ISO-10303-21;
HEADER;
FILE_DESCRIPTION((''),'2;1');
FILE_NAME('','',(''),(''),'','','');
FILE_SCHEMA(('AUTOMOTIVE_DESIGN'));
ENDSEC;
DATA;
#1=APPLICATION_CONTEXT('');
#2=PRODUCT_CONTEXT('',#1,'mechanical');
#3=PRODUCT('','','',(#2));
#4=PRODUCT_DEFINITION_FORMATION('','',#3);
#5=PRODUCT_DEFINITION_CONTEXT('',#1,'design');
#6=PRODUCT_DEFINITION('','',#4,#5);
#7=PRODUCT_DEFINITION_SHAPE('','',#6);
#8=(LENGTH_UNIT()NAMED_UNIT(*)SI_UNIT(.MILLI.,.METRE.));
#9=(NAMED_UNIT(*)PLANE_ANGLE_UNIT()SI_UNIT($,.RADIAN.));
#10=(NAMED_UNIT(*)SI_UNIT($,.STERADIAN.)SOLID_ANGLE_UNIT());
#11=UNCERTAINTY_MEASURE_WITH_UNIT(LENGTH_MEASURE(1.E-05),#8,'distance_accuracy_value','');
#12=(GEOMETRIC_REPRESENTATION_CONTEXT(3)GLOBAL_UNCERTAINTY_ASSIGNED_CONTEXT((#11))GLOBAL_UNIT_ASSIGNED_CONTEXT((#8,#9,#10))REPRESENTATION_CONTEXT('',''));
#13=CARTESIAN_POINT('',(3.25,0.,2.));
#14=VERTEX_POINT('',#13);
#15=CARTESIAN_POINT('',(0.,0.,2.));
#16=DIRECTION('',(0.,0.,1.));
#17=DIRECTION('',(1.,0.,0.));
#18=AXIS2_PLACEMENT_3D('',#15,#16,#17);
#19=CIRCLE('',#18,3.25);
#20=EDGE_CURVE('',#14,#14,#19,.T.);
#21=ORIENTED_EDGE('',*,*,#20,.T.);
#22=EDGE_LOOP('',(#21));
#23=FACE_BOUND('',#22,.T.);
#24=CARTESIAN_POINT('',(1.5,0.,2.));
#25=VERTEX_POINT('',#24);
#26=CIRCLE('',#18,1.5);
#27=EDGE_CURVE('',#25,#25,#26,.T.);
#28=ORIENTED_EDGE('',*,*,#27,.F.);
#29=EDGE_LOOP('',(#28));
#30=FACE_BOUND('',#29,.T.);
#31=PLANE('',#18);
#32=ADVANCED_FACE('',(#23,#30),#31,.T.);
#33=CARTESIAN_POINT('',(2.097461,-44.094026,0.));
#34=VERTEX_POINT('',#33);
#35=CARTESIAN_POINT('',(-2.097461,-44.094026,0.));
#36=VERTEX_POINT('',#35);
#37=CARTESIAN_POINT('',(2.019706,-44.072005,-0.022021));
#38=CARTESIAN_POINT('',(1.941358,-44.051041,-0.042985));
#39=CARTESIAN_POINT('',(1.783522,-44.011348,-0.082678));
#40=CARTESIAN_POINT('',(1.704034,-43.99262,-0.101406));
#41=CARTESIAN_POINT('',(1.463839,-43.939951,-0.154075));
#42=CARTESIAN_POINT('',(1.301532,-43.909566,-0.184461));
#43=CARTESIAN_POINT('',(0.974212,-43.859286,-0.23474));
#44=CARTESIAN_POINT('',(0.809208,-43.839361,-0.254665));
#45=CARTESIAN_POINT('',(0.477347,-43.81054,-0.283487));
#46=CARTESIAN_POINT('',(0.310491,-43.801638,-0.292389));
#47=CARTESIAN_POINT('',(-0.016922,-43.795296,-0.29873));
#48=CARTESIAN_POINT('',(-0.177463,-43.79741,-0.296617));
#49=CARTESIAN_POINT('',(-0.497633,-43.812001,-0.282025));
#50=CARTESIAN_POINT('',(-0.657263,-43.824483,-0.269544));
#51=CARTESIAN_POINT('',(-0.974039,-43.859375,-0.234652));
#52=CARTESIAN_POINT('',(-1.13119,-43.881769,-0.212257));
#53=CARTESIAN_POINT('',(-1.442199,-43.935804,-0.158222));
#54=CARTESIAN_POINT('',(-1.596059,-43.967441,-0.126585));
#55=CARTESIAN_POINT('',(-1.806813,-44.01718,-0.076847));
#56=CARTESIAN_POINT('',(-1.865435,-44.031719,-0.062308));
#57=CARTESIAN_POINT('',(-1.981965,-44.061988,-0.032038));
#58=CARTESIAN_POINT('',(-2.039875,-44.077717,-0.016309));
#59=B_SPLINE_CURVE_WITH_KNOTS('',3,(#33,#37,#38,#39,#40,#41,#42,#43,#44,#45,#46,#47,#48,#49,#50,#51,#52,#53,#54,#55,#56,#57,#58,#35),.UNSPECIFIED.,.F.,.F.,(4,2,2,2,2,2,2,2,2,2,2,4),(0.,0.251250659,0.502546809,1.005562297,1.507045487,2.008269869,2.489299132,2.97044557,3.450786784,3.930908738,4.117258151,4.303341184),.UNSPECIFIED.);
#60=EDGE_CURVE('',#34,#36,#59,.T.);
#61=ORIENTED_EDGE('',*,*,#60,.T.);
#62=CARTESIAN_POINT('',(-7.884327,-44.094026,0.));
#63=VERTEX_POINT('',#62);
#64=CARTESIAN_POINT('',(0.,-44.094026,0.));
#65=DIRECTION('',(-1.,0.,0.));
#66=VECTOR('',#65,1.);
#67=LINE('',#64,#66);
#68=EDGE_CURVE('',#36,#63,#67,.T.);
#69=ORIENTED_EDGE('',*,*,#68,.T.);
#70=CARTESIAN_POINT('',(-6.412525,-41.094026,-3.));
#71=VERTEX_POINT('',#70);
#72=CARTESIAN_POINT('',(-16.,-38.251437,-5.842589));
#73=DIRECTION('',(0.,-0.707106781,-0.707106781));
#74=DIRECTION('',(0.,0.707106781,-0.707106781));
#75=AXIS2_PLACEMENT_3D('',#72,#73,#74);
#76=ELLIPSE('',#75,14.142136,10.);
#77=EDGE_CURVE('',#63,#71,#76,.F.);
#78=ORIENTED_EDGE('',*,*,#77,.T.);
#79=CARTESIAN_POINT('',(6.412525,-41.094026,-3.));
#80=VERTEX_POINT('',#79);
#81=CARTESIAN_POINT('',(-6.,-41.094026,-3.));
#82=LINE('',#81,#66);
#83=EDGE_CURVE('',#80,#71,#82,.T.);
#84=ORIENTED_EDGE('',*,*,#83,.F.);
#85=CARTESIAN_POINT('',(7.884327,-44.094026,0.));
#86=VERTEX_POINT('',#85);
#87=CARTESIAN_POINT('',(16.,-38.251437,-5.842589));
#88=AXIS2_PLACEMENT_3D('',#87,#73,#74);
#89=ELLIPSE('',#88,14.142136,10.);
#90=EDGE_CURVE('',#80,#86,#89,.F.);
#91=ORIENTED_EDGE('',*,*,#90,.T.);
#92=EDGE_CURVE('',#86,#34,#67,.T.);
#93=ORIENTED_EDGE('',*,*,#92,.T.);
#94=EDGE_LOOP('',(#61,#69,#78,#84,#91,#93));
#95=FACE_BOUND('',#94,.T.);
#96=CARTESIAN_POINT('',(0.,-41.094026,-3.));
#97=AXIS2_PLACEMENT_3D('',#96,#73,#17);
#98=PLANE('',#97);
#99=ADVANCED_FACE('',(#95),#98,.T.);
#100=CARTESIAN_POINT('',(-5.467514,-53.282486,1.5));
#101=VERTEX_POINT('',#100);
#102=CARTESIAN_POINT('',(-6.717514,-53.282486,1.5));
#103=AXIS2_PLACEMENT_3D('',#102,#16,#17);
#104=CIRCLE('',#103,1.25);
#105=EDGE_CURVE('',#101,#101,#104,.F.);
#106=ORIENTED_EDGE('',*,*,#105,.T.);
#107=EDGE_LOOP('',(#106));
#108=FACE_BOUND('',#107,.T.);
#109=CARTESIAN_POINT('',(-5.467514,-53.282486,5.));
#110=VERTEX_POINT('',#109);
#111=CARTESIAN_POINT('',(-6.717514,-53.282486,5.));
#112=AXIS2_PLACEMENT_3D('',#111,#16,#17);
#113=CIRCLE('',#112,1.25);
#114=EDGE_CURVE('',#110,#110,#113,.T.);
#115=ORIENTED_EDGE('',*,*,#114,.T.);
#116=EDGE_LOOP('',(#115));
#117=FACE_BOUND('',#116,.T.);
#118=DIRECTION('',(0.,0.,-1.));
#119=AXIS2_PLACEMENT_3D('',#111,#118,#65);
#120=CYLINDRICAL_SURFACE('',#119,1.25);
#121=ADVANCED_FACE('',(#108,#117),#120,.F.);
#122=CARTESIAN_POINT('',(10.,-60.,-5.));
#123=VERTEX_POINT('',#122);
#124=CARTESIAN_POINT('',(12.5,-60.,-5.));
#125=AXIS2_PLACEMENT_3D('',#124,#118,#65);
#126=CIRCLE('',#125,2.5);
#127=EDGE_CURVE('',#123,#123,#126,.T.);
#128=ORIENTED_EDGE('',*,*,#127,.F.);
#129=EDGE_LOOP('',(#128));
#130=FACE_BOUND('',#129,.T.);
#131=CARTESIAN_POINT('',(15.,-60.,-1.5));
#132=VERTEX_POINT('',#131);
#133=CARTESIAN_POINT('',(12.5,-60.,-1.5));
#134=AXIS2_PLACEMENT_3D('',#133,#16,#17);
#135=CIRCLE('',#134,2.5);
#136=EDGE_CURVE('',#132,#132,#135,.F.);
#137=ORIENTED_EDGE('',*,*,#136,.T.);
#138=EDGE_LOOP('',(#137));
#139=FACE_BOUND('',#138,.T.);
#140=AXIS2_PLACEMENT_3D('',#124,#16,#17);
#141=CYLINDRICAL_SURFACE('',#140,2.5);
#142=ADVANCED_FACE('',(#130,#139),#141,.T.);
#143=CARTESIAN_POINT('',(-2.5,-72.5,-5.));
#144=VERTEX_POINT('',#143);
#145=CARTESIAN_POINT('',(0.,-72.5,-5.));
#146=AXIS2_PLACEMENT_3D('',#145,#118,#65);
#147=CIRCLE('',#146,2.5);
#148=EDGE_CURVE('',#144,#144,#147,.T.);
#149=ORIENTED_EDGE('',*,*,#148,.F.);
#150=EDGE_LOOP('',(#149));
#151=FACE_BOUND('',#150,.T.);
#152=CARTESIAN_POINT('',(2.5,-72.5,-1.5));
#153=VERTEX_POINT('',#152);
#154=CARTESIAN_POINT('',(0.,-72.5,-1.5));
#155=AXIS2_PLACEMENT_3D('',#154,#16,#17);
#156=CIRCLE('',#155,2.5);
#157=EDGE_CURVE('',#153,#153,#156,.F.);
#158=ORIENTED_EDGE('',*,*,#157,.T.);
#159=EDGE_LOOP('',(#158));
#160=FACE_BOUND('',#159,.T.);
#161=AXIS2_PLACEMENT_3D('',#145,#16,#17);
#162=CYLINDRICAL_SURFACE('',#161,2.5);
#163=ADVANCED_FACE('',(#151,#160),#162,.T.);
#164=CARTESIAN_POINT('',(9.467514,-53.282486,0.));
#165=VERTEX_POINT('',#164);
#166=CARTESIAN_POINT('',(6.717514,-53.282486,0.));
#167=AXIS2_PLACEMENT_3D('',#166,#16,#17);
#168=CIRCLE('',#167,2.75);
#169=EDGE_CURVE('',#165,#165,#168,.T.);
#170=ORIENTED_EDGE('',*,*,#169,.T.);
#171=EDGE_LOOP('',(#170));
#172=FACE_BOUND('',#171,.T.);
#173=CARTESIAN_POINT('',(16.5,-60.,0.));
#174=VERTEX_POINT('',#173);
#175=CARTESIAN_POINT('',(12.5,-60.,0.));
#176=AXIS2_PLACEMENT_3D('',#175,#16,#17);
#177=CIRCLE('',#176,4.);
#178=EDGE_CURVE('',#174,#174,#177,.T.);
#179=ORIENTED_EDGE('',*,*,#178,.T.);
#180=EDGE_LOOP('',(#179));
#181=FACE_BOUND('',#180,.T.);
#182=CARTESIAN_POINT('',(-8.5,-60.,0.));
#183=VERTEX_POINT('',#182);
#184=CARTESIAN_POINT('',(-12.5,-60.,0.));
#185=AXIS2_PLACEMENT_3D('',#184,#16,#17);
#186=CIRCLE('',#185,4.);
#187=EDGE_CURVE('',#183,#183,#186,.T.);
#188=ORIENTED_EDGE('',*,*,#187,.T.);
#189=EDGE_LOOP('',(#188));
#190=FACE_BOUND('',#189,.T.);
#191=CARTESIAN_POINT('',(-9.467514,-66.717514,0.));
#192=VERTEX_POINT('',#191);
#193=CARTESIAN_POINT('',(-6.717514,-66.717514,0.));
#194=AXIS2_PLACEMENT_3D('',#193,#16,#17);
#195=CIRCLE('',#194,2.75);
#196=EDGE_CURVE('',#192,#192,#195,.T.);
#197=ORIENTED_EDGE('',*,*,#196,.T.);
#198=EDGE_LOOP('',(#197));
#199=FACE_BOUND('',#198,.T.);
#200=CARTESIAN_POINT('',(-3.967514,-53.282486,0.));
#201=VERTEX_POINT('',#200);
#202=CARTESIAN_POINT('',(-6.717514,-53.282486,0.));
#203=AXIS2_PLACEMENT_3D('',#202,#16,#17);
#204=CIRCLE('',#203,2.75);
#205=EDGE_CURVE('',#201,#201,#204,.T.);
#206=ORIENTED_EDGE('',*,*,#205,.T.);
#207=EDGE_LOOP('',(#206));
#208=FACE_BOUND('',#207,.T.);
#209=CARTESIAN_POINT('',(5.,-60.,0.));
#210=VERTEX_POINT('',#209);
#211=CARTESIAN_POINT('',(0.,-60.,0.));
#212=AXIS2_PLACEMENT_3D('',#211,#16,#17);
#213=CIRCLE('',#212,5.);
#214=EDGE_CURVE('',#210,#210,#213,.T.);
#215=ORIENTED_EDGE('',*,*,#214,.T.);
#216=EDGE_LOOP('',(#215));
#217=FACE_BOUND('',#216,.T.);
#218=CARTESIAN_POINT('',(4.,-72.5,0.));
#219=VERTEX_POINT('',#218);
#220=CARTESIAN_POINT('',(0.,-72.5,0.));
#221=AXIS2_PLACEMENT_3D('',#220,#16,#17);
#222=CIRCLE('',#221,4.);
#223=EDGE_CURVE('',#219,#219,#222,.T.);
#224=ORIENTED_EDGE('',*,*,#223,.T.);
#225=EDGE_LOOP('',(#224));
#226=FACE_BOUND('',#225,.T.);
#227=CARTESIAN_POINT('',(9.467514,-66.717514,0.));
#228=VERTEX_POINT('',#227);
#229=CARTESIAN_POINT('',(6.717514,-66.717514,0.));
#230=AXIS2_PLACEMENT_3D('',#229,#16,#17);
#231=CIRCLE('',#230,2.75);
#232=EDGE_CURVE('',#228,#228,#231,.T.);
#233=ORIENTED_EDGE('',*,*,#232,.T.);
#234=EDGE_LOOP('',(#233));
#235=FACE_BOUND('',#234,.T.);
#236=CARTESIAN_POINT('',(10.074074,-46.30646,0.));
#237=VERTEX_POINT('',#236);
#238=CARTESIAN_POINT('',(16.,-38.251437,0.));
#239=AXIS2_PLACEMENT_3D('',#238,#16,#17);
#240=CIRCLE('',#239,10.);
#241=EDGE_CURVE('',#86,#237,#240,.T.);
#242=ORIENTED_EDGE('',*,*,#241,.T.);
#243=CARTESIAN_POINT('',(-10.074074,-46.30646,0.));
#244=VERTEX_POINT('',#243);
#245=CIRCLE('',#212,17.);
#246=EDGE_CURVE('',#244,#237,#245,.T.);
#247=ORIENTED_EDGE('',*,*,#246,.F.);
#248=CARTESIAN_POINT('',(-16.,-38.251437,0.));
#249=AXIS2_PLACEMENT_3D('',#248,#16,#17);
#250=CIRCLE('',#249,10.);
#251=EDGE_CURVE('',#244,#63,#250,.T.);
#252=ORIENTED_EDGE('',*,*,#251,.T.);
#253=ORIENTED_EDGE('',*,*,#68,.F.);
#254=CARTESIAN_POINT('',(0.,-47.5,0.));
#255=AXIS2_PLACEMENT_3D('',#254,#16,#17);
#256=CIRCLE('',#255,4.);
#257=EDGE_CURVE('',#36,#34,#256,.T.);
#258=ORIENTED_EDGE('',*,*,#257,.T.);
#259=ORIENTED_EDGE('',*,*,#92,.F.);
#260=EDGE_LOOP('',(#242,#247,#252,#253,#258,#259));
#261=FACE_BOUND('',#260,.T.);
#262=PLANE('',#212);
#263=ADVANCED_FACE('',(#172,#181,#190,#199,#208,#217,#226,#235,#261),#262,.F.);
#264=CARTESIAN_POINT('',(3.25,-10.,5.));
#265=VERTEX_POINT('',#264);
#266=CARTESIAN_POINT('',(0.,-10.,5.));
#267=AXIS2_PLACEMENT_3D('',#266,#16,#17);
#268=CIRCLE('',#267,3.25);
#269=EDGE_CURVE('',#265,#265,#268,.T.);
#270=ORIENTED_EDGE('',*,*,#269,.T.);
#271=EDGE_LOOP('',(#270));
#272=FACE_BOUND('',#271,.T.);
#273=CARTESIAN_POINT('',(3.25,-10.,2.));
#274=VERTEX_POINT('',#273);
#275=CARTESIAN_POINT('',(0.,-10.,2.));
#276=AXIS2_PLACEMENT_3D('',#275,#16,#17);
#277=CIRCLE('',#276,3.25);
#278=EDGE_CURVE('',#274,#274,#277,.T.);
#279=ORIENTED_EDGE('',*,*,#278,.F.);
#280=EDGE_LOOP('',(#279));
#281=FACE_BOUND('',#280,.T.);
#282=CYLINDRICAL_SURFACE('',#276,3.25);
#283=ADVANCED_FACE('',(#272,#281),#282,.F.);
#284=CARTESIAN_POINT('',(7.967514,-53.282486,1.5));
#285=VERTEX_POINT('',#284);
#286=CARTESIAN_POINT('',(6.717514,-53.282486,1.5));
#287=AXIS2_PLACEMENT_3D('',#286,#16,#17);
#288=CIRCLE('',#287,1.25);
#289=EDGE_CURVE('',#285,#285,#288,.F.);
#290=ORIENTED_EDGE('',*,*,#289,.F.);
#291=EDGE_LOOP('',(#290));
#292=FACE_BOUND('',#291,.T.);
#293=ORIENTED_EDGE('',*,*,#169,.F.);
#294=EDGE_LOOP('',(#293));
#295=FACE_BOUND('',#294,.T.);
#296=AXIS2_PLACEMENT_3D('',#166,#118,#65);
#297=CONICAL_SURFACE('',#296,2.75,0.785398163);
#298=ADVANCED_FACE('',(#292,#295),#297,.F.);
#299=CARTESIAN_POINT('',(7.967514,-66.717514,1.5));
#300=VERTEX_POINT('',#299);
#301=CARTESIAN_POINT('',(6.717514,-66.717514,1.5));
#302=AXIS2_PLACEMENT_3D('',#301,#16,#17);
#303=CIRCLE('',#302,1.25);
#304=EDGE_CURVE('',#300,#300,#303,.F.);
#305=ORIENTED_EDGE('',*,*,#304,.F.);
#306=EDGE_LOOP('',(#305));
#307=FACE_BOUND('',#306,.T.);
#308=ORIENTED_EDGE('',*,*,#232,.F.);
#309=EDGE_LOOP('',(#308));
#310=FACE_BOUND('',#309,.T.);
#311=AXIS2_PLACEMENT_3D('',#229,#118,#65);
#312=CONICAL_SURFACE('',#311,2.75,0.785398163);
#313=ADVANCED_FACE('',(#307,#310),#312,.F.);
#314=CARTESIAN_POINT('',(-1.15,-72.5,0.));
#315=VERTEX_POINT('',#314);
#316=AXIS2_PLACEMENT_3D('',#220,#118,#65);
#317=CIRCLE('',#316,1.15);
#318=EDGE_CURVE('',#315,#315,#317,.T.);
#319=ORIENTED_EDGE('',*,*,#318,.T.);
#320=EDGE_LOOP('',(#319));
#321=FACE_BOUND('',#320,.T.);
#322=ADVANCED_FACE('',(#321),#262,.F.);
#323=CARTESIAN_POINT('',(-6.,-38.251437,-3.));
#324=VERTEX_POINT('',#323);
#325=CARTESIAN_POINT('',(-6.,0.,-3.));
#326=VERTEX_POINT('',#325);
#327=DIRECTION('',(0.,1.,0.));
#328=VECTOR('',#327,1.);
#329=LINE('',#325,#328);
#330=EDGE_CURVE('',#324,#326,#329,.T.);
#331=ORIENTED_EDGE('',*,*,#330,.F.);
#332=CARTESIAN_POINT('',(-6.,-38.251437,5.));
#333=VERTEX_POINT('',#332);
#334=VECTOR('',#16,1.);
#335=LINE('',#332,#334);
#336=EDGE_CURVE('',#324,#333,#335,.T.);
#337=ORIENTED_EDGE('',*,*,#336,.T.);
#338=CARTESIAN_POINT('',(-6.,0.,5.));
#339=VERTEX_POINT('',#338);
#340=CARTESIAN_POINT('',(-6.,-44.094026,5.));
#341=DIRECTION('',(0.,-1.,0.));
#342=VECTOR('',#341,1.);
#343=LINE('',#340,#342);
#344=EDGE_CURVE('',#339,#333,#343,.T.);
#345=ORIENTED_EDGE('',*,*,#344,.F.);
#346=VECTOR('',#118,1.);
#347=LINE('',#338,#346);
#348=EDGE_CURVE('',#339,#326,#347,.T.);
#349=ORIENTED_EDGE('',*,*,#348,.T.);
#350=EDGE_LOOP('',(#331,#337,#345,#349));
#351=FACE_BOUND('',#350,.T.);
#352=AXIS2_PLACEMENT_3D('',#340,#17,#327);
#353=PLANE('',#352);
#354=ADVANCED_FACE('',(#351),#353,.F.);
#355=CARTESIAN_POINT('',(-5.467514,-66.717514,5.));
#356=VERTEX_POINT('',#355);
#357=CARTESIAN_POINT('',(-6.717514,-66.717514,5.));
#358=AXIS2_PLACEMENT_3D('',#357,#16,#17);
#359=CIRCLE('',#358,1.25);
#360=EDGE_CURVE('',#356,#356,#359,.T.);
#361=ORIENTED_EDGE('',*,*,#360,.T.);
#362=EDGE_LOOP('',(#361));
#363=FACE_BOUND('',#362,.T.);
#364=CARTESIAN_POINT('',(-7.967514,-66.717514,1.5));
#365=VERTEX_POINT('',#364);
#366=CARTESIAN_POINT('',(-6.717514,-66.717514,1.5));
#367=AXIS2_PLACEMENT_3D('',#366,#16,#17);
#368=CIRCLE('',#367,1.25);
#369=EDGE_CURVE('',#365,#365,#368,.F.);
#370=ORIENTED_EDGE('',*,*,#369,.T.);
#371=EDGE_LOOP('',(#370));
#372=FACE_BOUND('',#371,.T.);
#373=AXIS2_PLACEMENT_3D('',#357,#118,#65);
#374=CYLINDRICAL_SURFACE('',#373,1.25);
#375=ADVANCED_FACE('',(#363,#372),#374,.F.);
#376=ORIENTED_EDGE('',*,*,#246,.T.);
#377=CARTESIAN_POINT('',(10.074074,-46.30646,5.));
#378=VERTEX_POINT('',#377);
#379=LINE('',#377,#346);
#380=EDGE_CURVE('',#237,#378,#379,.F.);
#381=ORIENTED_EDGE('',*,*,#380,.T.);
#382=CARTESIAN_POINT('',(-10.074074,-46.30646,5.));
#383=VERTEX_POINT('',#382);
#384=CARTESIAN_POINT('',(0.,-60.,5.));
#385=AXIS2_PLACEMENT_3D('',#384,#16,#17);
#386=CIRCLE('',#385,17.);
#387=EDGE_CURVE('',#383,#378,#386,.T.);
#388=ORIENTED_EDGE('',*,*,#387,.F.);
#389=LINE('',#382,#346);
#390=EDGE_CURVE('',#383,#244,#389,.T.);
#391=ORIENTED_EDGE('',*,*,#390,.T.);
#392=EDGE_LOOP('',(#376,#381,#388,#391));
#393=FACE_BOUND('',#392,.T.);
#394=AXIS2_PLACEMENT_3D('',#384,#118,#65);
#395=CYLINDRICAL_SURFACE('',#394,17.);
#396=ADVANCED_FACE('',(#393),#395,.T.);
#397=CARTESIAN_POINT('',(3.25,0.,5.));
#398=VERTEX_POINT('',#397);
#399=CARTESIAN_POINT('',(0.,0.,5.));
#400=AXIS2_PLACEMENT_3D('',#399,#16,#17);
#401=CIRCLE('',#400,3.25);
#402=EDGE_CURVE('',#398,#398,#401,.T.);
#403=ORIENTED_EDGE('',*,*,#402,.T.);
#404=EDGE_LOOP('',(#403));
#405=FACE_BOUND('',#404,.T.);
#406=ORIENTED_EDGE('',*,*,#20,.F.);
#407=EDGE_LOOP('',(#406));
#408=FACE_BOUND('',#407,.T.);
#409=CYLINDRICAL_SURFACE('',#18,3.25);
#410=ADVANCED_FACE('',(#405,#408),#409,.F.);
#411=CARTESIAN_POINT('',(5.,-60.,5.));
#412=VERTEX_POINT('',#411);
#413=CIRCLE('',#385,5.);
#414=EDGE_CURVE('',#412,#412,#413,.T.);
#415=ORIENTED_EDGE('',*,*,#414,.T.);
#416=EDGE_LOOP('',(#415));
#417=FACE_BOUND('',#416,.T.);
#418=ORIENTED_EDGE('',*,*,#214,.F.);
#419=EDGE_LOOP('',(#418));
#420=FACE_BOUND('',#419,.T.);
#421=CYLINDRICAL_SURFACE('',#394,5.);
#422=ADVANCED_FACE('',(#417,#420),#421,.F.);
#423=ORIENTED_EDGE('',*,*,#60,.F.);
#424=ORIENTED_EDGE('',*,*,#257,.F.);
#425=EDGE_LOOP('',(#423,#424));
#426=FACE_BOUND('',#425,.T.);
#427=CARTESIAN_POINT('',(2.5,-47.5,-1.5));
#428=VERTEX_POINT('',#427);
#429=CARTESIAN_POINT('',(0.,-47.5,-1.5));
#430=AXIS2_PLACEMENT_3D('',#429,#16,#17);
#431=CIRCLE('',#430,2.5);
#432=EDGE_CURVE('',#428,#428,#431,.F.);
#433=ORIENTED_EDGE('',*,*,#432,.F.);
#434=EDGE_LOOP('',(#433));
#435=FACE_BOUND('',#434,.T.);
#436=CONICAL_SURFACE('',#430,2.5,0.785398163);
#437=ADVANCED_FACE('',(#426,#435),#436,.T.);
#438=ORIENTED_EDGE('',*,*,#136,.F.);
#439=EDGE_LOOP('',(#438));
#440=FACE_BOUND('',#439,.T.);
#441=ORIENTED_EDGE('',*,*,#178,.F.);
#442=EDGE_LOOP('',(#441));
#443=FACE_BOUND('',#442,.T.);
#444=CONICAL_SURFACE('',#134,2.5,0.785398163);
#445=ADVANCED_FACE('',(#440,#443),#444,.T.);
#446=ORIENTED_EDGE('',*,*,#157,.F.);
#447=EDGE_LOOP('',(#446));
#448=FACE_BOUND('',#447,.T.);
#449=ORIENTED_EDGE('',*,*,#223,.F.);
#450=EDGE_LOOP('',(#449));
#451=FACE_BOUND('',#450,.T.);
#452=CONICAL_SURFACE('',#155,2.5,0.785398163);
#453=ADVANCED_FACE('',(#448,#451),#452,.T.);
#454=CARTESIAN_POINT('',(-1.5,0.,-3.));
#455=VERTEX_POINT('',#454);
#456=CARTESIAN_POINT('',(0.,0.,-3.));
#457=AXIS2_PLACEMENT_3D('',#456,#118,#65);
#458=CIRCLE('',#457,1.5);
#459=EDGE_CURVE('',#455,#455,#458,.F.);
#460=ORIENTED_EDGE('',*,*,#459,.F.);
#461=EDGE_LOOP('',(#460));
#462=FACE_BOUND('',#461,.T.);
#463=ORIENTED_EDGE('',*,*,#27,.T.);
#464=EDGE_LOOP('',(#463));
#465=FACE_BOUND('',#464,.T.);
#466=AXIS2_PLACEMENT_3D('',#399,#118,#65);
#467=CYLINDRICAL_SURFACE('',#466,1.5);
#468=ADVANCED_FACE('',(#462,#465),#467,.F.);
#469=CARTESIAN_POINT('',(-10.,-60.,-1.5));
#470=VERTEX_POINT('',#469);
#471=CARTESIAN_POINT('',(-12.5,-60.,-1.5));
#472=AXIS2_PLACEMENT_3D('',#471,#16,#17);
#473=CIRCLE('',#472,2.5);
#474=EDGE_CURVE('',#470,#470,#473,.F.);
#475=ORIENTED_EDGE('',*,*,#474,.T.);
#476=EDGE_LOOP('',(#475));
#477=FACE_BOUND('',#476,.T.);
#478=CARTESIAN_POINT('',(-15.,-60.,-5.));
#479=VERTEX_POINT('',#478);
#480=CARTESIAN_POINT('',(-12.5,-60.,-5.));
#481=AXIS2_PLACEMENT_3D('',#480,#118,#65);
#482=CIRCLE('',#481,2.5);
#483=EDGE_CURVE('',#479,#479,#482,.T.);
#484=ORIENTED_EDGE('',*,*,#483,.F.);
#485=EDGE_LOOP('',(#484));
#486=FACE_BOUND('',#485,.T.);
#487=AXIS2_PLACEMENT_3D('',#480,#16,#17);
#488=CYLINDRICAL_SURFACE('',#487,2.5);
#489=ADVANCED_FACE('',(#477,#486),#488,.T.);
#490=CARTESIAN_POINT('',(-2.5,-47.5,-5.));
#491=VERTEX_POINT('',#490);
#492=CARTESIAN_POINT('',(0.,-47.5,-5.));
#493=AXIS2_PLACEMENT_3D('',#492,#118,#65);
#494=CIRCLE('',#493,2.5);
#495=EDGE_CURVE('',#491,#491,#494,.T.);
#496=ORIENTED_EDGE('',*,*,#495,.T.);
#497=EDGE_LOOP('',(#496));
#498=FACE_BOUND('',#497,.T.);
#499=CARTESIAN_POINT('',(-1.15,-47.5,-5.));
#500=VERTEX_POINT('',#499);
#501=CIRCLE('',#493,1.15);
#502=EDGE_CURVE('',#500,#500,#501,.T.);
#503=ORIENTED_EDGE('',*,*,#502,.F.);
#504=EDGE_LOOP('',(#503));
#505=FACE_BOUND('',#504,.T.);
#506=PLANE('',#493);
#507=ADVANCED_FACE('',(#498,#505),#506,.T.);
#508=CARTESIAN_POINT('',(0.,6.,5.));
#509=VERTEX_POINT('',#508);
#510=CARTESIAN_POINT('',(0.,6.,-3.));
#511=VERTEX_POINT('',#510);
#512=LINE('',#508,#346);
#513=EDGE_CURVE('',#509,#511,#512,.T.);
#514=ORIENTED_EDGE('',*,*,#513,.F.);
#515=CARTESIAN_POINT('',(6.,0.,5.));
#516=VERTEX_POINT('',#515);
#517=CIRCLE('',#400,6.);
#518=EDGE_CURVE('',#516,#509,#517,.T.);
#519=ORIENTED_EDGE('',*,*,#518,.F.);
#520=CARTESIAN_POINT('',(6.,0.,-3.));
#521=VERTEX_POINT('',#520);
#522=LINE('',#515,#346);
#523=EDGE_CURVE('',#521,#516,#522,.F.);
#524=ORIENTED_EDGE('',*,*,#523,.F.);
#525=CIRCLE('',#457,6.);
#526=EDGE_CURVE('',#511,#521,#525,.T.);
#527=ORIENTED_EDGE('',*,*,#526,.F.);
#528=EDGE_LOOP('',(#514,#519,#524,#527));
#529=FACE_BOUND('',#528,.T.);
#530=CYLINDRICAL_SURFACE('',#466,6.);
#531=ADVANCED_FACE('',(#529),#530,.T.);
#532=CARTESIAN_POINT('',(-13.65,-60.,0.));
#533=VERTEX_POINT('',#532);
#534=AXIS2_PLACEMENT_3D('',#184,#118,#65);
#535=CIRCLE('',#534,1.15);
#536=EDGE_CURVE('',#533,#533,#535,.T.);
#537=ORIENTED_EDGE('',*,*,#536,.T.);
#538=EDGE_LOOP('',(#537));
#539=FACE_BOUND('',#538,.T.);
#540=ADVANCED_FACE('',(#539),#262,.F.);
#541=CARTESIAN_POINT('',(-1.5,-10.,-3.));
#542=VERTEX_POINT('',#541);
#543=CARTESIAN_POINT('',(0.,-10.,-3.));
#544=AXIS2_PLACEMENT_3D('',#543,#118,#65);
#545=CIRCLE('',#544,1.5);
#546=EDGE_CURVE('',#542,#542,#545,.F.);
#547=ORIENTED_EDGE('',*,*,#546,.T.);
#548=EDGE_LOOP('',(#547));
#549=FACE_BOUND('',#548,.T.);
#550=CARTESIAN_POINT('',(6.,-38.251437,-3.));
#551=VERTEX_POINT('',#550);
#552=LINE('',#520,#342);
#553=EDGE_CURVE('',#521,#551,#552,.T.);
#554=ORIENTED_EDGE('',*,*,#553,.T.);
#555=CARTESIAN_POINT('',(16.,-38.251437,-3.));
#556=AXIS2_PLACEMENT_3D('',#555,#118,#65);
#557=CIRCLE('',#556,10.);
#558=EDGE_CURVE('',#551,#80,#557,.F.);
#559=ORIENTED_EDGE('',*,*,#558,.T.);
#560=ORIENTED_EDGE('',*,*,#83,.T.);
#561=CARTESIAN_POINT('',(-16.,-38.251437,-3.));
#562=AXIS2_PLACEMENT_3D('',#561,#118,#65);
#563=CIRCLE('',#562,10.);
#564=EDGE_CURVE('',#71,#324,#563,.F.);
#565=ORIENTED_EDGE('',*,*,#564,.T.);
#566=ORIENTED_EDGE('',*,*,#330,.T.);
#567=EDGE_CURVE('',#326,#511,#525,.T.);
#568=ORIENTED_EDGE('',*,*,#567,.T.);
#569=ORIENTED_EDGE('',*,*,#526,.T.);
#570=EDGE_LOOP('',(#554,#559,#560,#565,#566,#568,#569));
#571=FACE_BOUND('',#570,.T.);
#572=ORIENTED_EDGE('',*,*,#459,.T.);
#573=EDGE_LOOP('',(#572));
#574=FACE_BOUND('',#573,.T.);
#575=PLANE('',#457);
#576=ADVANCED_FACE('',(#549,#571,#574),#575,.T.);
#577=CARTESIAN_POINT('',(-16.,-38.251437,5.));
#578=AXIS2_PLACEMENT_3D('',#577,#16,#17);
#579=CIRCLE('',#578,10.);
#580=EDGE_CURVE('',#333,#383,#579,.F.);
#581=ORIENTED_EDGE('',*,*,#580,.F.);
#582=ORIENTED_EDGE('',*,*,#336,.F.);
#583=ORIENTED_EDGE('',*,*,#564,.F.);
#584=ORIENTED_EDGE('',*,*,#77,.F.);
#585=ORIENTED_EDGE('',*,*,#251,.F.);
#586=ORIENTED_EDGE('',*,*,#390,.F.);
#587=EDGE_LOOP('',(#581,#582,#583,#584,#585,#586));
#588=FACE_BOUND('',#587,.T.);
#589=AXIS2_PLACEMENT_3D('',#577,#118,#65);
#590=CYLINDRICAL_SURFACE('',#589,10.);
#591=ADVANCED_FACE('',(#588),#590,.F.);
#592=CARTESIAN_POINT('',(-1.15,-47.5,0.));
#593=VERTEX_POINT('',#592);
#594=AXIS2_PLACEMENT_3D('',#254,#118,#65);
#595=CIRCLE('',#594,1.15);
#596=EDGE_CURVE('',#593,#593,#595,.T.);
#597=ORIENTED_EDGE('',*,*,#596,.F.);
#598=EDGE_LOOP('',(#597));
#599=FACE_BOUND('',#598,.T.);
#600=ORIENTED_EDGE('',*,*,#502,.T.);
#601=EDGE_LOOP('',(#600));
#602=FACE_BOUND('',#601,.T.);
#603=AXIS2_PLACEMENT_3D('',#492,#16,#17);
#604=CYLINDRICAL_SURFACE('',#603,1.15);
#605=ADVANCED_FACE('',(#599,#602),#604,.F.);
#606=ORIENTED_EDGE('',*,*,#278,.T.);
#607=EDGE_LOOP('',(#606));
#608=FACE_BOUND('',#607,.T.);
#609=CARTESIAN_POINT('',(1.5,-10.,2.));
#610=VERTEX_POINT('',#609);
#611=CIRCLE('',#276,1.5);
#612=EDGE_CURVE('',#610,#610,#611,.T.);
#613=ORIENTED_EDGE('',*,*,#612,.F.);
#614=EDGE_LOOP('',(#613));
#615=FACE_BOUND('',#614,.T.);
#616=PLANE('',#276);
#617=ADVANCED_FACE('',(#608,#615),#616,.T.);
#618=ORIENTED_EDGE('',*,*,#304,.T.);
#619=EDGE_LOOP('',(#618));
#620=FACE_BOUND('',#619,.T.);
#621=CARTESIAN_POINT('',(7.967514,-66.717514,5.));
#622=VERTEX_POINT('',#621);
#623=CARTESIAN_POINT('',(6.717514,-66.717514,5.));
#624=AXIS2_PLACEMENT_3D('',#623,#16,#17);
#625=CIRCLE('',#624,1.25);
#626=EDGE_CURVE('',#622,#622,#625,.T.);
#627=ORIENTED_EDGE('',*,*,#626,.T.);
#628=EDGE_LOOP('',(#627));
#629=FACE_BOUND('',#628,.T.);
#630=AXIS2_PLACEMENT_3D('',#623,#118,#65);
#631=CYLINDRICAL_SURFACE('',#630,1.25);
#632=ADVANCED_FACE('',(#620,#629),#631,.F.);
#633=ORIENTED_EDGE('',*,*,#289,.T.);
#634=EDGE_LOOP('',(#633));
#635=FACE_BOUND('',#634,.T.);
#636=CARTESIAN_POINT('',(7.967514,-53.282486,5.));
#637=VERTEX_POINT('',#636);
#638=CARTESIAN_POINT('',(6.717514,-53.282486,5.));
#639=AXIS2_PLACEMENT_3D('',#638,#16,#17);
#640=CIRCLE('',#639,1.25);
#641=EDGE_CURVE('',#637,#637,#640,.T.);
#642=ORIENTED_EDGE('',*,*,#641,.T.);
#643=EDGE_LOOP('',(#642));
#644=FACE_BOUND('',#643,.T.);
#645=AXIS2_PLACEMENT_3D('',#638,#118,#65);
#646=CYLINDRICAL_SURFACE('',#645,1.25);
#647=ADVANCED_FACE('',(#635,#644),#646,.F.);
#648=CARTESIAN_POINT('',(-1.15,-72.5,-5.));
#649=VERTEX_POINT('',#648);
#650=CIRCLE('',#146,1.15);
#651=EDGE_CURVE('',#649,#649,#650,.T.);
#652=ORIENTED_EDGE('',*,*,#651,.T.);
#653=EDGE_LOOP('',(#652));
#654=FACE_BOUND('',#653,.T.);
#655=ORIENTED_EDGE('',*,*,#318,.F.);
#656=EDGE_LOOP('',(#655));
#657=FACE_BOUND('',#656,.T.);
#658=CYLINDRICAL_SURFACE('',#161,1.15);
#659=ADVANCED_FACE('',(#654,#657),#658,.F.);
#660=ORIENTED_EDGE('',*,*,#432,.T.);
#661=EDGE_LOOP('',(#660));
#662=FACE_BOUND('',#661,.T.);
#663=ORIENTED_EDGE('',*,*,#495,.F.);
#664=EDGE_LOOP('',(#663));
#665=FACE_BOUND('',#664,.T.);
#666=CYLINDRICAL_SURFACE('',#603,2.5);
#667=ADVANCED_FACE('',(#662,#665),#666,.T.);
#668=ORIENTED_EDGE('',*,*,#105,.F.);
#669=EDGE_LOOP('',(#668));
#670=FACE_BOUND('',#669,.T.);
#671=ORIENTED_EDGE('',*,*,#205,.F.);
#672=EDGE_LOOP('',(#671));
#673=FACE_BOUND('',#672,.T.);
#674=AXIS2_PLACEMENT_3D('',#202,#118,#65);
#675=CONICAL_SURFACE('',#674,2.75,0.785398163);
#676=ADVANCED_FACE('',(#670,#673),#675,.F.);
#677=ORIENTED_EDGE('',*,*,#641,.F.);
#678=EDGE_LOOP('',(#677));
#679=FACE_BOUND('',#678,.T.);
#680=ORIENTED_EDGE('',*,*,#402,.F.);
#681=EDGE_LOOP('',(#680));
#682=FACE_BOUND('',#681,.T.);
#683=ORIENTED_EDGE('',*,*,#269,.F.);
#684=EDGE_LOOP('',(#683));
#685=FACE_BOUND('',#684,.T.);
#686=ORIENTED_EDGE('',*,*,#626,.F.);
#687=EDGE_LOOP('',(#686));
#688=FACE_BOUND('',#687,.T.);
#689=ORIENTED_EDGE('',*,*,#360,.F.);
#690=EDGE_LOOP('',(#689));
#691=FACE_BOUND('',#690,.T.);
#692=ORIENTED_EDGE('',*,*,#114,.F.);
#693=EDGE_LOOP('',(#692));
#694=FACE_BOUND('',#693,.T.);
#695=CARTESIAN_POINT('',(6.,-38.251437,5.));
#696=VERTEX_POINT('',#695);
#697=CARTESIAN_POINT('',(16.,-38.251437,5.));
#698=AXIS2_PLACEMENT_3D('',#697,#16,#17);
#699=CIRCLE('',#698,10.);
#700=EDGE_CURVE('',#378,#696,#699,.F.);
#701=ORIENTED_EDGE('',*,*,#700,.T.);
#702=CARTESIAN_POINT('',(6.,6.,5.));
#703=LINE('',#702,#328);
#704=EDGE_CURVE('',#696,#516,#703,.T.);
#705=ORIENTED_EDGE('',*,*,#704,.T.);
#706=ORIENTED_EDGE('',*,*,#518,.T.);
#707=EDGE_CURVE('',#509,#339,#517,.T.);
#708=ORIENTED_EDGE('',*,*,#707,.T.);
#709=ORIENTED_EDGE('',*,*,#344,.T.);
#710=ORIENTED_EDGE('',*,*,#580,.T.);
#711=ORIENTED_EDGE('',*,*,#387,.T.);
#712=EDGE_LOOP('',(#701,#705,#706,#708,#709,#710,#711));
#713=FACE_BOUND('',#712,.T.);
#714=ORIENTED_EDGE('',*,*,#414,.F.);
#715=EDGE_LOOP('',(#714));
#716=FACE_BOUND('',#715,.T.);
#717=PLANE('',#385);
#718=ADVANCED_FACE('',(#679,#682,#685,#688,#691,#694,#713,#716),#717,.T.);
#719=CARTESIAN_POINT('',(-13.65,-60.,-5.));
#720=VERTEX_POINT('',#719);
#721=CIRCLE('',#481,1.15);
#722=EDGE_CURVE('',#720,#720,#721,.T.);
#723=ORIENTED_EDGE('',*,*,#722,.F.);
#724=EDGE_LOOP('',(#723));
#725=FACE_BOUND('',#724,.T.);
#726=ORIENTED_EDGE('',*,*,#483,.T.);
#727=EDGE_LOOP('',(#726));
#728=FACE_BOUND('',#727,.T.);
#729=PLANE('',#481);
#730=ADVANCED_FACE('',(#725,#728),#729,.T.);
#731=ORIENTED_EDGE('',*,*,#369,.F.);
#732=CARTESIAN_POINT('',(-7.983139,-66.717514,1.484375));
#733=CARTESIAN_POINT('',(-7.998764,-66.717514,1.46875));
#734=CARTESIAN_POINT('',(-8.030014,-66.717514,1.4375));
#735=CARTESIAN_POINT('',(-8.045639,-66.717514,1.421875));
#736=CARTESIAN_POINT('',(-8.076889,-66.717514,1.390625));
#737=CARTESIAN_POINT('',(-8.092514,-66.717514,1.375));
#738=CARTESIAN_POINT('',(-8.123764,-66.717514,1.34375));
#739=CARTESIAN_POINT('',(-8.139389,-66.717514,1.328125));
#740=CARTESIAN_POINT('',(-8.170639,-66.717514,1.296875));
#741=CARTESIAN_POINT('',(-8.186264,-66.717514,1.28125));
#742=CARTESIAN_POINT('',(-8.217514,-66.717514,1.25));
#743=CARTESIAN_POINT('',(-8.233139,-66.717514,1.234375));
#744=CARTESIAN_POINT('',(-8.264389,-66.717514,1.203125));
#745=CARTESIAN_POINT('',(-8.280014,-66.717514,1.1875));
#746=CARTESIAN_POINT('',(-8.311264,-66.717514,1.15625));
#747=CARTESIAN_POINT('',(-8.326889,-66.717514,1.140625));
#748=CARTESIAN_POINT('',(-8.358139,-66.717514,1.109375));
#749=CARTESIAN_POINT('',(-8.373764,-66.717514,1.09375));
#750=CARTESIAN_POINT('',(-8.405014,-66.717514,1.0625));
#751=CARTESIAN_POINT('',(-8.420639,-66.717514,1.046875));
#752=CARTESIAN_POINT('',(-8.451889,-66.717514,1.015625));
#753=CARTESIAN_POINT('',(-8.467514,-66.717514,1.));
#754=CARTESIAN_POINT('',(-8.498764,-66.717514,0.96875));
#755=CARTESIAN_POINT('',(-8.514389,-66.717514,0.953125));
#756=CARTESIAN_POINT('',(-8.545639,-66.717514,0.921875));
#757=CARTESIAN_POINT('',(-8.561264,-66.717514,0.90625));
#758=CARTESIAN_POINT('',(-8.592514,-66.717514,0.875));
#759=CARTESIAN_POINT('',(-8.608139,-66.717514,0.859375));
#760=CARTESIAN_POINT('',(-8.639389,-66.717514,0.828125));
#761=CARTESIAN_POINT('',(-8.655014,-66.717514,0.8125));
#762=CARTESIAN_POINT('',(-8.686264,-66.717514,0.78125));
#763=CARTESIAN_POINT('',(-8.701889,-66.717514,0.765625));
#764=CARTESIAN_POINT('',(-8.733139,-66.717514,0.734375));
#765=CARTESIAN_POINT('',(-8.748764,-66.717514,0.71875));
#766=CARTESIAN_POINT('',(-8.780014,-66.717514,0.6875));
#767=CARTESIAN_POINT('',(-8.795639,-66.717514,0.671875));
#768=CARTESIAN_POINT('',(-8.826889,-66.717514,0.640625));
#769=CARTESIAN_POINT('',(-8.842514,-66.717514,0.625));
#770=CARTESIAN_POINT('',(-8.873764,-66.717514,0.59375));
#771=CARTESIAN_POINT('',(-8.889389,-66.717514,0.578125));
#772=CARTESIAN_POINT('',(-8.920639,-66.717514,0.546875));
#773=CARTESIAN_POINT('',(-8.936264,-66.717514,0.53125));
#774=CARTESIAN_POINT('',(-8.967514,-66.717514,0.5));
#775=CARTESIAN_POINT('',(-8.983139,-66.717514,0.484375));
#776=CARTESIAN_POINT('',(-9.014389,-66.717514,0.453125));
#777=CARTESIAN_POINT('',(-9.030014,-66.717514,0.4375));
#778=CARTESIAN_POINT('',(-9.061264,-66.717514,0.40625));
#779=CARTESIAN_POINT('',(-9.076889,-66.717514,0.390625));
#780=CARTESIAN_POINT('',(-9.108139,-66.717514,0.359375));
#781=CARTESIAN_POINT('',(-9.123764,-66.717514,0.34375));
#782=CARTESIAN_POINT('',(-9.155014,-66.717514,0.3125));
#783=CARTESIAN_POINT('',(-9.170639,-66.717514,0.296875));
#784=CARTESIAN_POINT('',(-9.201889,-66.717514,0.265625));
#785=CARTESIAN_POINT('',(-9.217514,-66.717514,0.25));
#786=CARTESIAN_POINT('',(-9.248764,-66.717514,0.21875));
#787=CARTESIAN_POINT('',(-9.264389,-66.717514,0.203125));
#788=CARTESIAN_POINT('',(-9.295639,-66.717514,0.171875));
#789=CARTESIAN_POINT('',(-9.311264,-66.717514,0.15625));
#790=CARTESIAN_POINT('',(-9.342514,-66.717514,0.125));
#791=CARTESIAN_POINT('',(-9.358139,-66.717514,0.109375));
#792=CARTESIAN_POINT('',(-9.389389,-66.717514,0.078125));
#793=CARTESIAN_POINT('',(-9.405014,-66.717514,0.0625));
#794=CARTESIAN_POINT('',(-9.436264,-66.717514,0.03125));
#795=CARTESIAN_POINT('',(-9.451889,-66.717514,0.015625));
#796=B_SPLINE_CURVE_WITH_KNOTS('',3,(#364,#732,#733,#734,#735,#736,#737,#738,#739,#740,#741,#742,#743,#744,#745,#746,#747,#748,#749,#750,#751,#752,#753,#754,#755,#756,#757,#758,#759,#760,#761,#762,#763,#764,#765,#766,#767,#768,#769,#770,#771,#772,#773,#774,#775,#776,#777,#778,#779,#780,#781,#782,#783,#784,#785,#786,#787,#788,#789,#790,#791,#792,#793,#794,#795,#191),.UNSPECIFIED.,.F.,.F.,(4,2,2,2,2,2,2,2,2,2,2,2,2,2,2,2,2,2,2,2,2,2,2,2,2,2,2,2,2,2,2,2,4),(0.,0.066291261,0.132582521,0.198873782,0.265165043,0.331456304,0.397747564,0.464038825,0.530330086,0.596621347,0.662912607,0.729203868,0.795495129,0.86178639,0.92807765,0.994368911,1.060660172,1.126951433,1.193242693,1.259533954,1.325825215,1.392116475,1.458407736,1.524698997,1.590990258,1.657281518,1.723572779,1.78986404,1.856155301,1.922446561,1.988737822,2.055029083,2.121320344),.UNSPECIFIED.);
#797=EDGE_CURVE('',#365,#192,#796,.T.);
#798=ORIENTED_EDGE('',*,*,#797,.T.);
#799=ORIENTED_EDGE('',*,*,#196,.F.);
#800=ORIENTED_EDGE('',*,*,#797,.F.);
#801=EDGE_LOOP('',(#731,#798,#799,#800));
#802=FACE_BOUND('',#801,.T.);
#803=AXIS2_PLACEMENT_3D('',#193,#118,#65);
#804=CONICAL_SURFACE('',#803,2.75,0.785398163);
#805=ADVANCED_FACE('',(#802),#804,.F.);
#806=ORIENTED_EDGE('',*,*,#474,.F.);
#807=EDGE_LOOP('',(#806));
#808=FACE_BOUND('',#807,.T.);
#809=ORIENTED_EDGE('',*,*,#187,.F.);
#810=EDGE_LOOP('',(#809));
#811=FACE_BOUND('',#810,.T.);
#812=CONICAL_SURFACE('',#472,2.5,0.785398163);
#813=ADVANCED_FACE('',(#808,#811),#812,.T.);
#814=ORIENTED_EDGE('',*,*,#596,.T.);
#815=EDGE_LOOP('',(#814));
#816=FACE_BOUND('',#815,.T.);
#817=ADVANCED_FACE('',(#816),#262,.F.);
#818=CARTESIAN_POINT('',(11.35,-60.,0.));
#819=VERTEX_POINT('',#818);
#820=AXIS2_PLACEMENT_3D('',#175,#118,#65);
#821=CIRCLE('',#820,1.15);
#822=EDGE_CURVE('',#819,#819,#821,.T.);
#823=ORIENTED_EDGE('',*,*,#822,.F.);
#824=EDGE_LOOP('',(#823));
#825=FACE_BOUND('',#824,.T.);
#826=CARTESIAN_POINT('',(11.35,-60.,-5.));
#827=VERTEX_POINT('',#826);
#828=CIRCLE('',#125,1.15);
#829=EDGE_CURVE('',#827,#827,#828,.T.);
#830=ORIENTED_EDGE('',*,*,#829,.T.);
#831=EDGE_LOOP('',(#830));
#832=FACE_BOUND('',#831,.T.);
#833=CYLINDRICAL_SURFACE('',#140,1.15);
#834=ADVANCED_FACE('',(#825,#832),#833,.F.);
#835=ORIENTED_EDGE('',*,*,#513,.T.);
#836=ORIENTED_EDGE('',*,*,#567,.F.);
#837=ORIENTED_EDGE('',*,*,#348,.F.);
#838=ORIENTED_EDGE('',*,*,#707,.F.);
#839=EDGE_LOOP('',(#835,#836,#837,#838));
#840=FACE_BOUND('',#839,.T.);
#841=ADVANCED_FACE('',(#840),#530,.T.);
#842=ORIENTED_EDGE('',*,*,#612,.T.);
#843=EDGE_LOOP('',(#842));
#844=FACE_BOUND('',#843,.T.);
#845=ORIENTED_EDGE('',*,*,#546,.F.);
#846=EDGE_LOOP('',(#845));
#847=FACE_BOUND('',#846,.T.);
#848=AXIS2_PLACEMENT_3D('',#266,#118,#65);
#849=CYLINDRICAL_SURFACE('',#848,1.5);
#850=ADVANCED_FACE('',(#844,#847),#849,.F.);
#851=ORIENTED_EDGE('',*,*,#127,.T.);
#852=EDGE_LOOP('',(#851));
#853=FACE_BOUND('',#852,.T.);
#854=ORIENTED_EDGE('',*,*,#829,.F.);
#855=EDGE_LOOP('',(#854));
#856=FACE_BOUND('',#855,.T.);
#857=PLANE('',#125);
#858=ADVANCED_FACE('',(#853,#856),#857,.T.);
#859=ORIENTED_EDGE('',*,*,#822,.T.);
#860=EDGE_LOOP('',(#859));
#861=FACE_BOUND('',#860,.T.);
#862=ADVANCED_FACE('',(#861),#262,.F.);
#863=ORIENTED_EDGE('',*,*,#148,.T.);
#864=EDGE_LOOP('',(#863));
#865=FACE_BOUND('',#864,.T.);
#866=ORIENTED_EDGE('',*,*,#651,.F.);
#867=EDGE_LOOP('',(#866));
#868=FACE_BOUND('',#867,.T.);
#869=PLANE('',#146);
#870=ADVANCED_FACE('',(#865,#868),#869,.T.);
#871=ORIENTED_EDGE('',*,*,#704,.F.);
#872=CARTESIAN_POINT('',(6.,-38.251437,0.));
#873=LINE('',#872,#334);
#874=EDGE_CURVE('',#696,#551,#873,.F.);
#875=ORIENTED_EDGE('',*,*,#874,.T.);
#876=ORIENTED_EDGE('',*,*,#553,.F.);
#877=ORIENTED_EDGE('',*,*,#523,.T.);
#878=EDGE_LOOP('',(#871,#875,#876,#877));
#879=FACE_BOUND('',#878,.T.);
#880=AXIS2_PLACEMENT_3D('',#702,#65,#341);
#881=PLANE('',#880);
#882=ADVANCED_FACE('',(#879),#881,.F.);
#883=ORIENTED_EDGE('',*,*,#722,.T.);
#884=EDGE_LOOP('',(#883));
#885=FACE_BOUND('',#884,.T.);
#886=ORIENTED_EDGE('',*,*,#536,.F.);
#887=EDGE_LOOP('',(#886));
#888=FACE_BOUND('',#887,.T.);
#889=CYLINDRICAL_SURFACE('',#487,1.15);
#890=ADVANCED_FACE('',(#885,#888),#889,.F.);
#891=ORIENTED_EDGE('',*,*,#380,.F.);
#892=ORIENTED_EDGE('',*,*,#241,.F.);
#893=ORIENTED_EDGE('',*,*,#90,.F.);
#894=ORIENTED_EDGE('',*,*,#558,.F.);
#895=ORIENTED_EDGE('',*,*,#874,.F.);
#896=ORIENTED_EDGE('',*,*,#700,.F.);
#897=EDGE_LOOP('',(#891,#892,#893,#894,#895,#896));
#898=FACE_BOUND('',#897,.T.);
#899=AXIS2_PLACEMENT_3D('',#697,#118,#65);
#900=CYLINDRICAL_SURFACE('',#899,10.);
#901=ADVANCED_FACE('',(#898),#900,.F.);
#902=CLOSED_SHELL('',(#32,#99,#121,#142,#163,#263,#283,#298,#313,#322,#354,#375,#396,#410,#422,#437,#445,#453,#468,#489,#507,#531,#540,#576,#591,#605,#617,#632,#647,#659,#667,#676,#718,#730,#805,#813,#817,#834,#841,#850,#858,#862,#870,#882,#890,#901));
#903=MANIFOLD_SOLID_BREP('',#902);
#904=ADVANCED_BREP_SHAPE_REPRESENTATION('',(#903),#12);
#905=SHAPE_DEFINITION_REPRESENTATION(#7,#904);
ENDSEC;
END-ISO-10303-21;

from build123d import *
from build123d.topology import SkipClean

# Parameters (mm, degrees)
SCHIZZO1_R                   = 1.5
SCHIZZO1_R_2                 = 1.25
SCHIZZO1_R_3                 = 5
ESTRUSIONE_ESTRUSIONE1_DEPTH = 5
ESTRUSIONE_ESTRUSIONE2_START = 3
SCHIZZO2_W                   = 12
SCHIZZO2_H                   = 50.094026279
SCHIZZO2_R                   = 1.5
ESTRUSIONE_ESTRUSIONE2_DEPTH = 3
SMUSSO1_SIZE                 = 3
SMUSSO2_SIZE                 = 1.5
RACCORDO1_R                  = 10
RACCORDO2_R                  = 6
SCHIZZO3_R                   = 3.25
TAGLIO_ESTRUSIONE1_DEPTH     = 3
SCHIZZO6_R                   = 2.5
SCHIZZO6_R_2                 = 1.15
ESTRUSIONE_ESTRUSIONE4_DEPTH = 5
SMUSSO5_SIZE                 = 1.5


# Some blends are built 0.0001 mm under size
with BuildPart() as part:
    # Schizzo1 → Estrusione-Estrusione1 (new body)
    with BuildSketch(Plane.XY):
        with BuildLine():
            Line((-6, -44.094026279), (-6, 6))
            Line((-6, 6), (6, 6))
            Line((6, 6), (6, -44.094026279))
            ThreePointArc((6, -44.094026279), (0, -77), (-6, -44.094026279))
        make_face()
        Circle(SCHIZZO1_R, mode=Mode.SUBTRACT)
        with Locations((0, -10)):
            Circle(SCHIZZO1_R, mode=Mode.SUBTRACT)
        with Locations((6.717514421, -53.282485579)):
            Circle(SCHIZZO1_R_2, mode=Mode.SUBTRACT)
        with Locations((6.717514421, -66.717514421)):
            Circle(SCHIZZO1_R_2, mode=Mode.SUBTRACT)
        with Locations((-6.717514421, -66.717514421)):
            Circle(SCHIZZO1_R_2, mode=Mode.SUBTRACT)
        with Locations((-6.717514421, -53.282485579)):
            Circle(SCHIZZO1_R_2, mode=Mode.SUBTRACT)
        with Locations((0, -60)):
            Circle(SCHIZZO1_R_3, mode=Mode.SUBTRACT)
    extrude(amount=ESTRUSIONE_ESTRUSIONE1_DEPTH)

    # Schizzo2 → Estrusione-Estrusione2 (add)
    with SkipClean():  # the faces are left unmerged after this step: merging them gives an invalid solid
        with BuildSketch(Plane(origin=(0, 0, 0), x_dir=(-1, 0, 0), z_dir=(0, 0, -1)).offset(ESTRUSIONE_ESTRUSIONE2_START)):
            with Locations((0, -19.04701314)):
                Rectangle(SCHIZZO2_W, SCHIZZO2_H)
            with Locations((0, -10)):
                Circle(SCHIZZO2_R, mode=Mode.SUBTRACT)
            Circle(SCHIZZO2_R, mode=Mode.SUBTRACT)
        extrude(amount=-ESTRUSIONE_ESTRUSIONE2_DEPTH)

    # Smusso1
    smusso1_edges = [part.edges().sort_by_distance(p)[0] for p in [
        (0, -44.094026279, -3),
    ]]
    chamfer(smusso1_edges, length=SMUSSO1_SIZE - 0.0001)  # a hair under: the kernel refuses the full size

    # Smusso2
    smusso2_edges = [part.edges().sort_by_distance(p)[0] for p in [
        (5.467514421, -53.282485579, 0),
        (5.467514421, -66.717514421, 0),
        (-7.967514421, -66.717514421, 0),
        (-7.967514421, -53.282485579, 0),
    ]]
    chamfer(smusso2_edges, length=SMUSSO2_SIZE)

    # Raccordo1
    # the kernel refuses this fillet: 10 mm, written as the material it adds along each edge
    with BuildSketch(Plane(origin=(-6, -44.094026279, 0), x_dir=(-0.8787816347081872, -0.47722409672983424, 0), z_dir=(0, 0, 1))) as raccordo1_piece_1_section:
        with BuildLine():
            CenterArc((5.999591874, -9.906601275), RACCORDO1_R, 97.8369433, 53.658796906)
            Line((-2.788224473, -5.134360308), (0, 0))
            ThreePointArc((0, 0), (2.318024133, -0.158777832), (4.636048266, 0))
        make_face()
    raccordo1_piece_1 = extrude(amount=5, mode=Mode.PRIVATE)
    raccordo1_piece_1 = split(raccordo1_piece_1, bisect_by=Plane(origin=(-8.522721578, -45.012190054, 0.918063775), z_dir=(0, -0.7071067811865479, -0.7071067811865471)), keep=Keep.TOP, mode=Mode.PRIVATE)
    add(raccordo1_piece_1)
    with BuildSketch(Plane(origin=(-6, -44.094026279, -14.606473626), x_dir=(-0.878781634708187, -0.4772240967298343, 0), z_dir=(0, 0, 1))) as raccordo1_piece_2_section:
        with BuildLine():
            CenterArc((5.999591874, -9.906601275), RACCORDO1_R, 97.8369433, 53.658796906)
            Line((-2.788224473, -5.134360308), (0, 0))
            ThreePointArc((0, 0), (2.318024133, -0.158777832), (4.636048266, 0))
        make_face()
    raccordo1_piece_2 = extrude(amount=19.606473626, mode=Mode.PRIVATE)
    raccordo1_piece_2 = split(raccordo1_piece_2, bisect_by=Plane(origin=(-6.210339147, -41.400349773, 0), z_dir=(0, 0, -1)), keep=Keep.TOP, mode=Mode.PRIVATE)
    raccordo1_piece_2 = split(raccordo1_piece_2, bisect_by=Plane(origin=(-6.210339147, -41.400349773, -3), z_dir=(0, 0, 1)), keep=Keep.TOP, mode=Mode.PRIVATE)
    raccordo1_piece_2 = split(raccordo1_piece_2, bisect_by=Plane(origin=(-6.210339147, -42.183942817, -1.910183463), z_dir=(0, 0.7071067811865479, 0.7071067811865471)), keep=Keep.TOP, mode=Mode.PRIVATE)
    add(raccordo1_piece_2)
    with BuildSketch(Plane(origin=(-6, -44.094026279, 0), x_dir=(-0.8787816347081872, -0.47722409672983424, 0), z_dir=(0, 0, 1))) as raccordo1_piece_3_section:
        with BuildLine():
            CenterArc((5.999591874, -9.906601275), RACCORDO1_R, 97.8369433, 53.658796906)
            Line((-2.788224473, -5.134360308), (0, 0))
            ThreePointArc((0, 0), (2.318024133, -0.158777832), (4.636048266, 0))
        make_face()
    raccordo1_piece_3 = extrude(amount=5, mode=Mode.PRIVATE)
    raccordo1_piece_3 = split(raccordo1_piece_3, bisect_by=Plane(origin=(-7.748442969, -44.094026279, 2.842039125), z_dir=(0, -1, 0)), keep=Keep.TOP, mode=Mode.PRIVATE)
    raccordo1_piece_3 = split(raccordo1_piece_3, bisect_by=Plane(origin=(-7.748442969, -45.857184965, 1.763058685), z_dir=(0, 0.7071067811865479, 0.7071067811865471)), keep=Keep.TOP, mode=Mode.PRIVATE)
    add(raccordo1_piece_3)
    with BuildSketch(Plane(origin=(-6, -44.094026279, 0), x_dir=(-0.8787816347081872, -0.47722409672983424, 0), z_dir=(0, 0, 1))) as raccordo1_piece_4_section:
        with BuildLine():
            CenterArc((5.999591874, -9.906601275), RACCORDO1_R, 97.8369433, 53.658796906)
            Line((-2.788224473, -5.134360308), (0, 0))
            ThreePointArc((0, 0), (2.318024133, -0.158777832), (4.636048266, 0))
        make_face()
    raccordo1_piece_4 = extrude(amount=5, mode=Mode.PRIVATE)
    raccordo1_piece_4 = split(raccordo1_piece_4, bisect_by=Plane(origin=(-6.391601074, -44.094026279, 2.5), z_dir=(0, 1, 0)), keep=Keep.TOP, mode=Mode.PRIVATE)
    add(raccordo1_piece_4)
    with BuildSketch(Plane(origin=(6, -44.094026279, 0), x_dir=(0.8787816347081857, -0.4772240967298369, 0), z_dir=(0, 0, 1))) as raccordo1_piece_5_section:
        with BuildLine():
            CenterArc((5.999591874, 9.906601275), RACCORDO1_R, 208.504259794, 53.658796906)
            Line((-2.788224473, 5.134360308), (0, 0))
            ThreePointArc((0, 0), (2.318024133, 0.158777832), (4.636048266, 0))
        make_face()
    raccordo1_piece_5 = extrude(amount=5, mode=Mode.PRIVATE)
    raccordo1_piece_5 = split(raccordo1_piece_5, bisect_by=Plane(origin=(8.522721578, -45.012190054, 0.918063775), z_dir=(0, -0.7071067811865479, -0.7071067811865471)), keep=Keep.TOP, mode=Mode.PRIVATE)
    add(raccordo1_piece_5)
    with BuildSketch(Plane(origin=(6, -44.094026279, -14.606473626), x_dir=(0.8787816347081857, -0.4772240967298369, 0), z_dir=(0, 0, 1))) as raccordo1_piece_6_section:
        with BuildLine():
            CenterArc((5.999591874, 9.906601275), RACCORDO1_R, 208.504259794, 53.658796906)
            Line((-2.788224473, 5.134360308), (0, 0))
            ThreePointArc((0, 0), (2.318024133, 0.158777832), (4.636048266, 0))
        make_face()
    raccordo1_piece_6 = extrude(amount=19.606473626, mode=Mode.PRIVATE)
    raccordo1_piece_6 = split(raccordo1_piece_6, bisect_by=Plane(origin=(6.210339147, -41.400349773, 0), z_dir=(0, 0, -1)), keep=Keep.TOP, mode=Mode.PRIVATE)
    raccordo1_piece_6 = split(raccordo1_piece_6, bisect_by=Plane(origin=(6.210339147, -42.183942817, -1.910183463), z_dir=(0, 0.7071067811865479, 0.7071067811865471)), keep=Keep.TOP, mode=Mode.PRIVATE)
    raccordo1_piece_6 = split(raccordo1_piece_6, bisect_by=Plane(origin=(6.210339147, -41.400349773, -3), z_dir=(0, 0, 1)), keep=Keep.TOP, mode=Mode.PRIVATE)
    add(raccordo1_piece_6)
    with BuildSketch(Plane(origin=(6, -44.094026279, 0), x_dir=(0.8787816347081857, -0.4772240967298369, 0), z_dir=(0, 0, 1))) as raccordo1_piece_7_section:
        with BuildLine():
            CenterArc((5.999591874, 9.906601275), RACCORDO1_R, 208.504259794, 53.658796906)
            Line((-2.788224473, 5.134360308), (0, 0))
            ThreePointArc((0, 0), (2.318024133, 0.158777832), (4.636048266, 0))
        make_face()
    raccordo1_piece_7 = extrude(amount=5, mode=Mode.PRIVATE)
    raccordo1_piece_7 = split(raccordo1_piece_7, bisect_by=Plane(origin=(7.748442969, -44.094026279, 2.842039125), z_dir=(0, -1, 0)), keep=Keep.TOP, mode=Mode.PRIVATE)
    raccordo1_piece_7 = split(raccordo1_piece_7, bisect_by=Plane(origin=(7.748442969, -45.857184965, 1.763058685), z_dir=(0, 0.7071067811865479, 0.7071067811865471)), keep=Keep.TOP, mode=Mode.PRIVATE)
    add(raccordo1_piece_7)
    with BuildSketch(Plane(origin=(6, -44.094026279, 0), x_dir=(0.8787816347081857, -0.4772240967298369, 0), z_dir=(0, 0, 1))) as raccordo1_piece_8_section:
        with BuildLine():
            CenterArc((5.999591874, 9.906601275), RACCORDO1_R, 208.504259794, 53.658796906)
            Line((-2.788224473, 5.134360308), (0, 0))
            ThreePointArc((0, 0), (2.318024133, 0.158777832), (4.636048266, 0))
        make_face()
    raccordo1_piece_8 = extrude(amount=5, mode=Mode.PRIVATE)
    raccordo1_piece_8 = split(raccordo1_piece_8, bisect_by=Plane(origin=(6.391601074, -44.094026279, 2.5), z_dir=(0, 1, 0)), keep=Keep.TOP, mode=Mode.PRIVATE)
    add(raccordo1_piece_8)

    # Raccordo2
    raccordo2_edges = [part.edges().sort_by_distance(p)[0] for p in [
        (-6, 6, 1),
        (6, 6, 1),
    ]]
    fillet(raccordo2_edges, radius=RACCORDO2_R - 0.0001)  # a hair under: the kernel refuses the full size

    # Schizzo3 → Taglio-Estrusione1 (cut)
    with BuildSketch(Plane.XY.offset(5)):
        Circle(SCHIZZO3_R)
        with Locations((0, -10)):
            Circle(SCHIZZO3_R)
    extrude(amount=-TAGLIO_ESTRUSIONE1_DEPTH, mode=Mode.SUBTRACT)

    # Schizzo6 → Estrusione-Estrusione4 (add)
    # profile 1 of 4: a face of its own
    with BuildSketch(Plane(origin=(0, 0, 0), x_dir=(-1, 0, 0), z_dir=(0, 0, -1))):
        with Locations(Location((0, -47.5, 0), (0, 0, 180))):
            Circle(SCHIZZO6_R)
        with Locations((0, -47.5)):
            Circle(SCHIZZO6_R_2, mode=Mode.SUBTRACT)
    # profile 2 of 4: a face of its own
    with BuildSketch(Plane(origin=(0, 0, 0), x_dir=(-1, 0, 0), z_dir=(0, 0, -1))):
        with Locations(Location((12.5, -60, 0), (0, 0, 180))):
            Circle(SCHIZZO6_R)
        with Locations((12.5, -60)):
            Circle(SCHIZZO6_R_2, mode=Mode.SUBTRACT)
    # profile 3 of 4: a face of its own
    with BuildSketch(Plane(origin=(0, 0, 0), x_dir=(-1, 0, 0), z_dir=(0, 0, -1))):
        with Locations(Location((0, -72.5, 0), (0, 0, 180))):
            Circle(SCHIZZO6_R)
        with Locations((0, -72.5)):
            Circle(SCHIZZO6_R_2, mode=Mode.SUBTRACT)
    # profile 4 of 4: a face of its own
    with BuildSketch(Plane(origin=(0, 0, 0), x_dir=(-1, 0, 0), z_dir=(0, 0, -1))):
        with Locations(Location((-12.5, -60, 0), (0, 0, 180))):
            Circle(SCHIZZO6_R)
        with Locations((-12.5, -60)):
            Circle(SCHIZZO6_R_2, mode=Mode.SUBTRACT)
    extrude(amount=ESTRUSIONE_ESTRUSIONE4_DEPTH)

    # Smusso5
    # the kernel refuses this chamfer: 1.5 mm, written as the material it adds along each edge
    with BuildSketch(Plane(origin=(0, -47.5, 0), x_dir=(1, 0, 0), z_dir=(0, 1, 0))) as smusso5_piece_1:
        Polygon((2.5 + SMUSSO5_SIZE, 0), (2.5, SMUSSO5_SIZE), (2.5, 0), align=None)
    revolve(axis=Axis((0, -47.5, 0), (0, 0, -1)))
    with BuildSketch(Plane(origin=(-12.5, -60, 0), x_dir=(1, 0, 0), z_dir=(0, 1, 0))) as smusso5_piece_2:
        Polygon((2.5 + SMUSSO5_SIZE, 0), (2.5, SMUSSO5_SIZE), (2.5, 0), align=None)
    revolve(axis=Axis((-12.5, -60, 0), (0, 0, -1)))
    with BuildSketch(Plane(origin=(0, -72.5, 0), x_dir=(1, 0, 0), z_dir=(0, 1, 0))) as smusso5_piece_3:
        Polygon((2.5 + SMUSSO5_SIZE, 0), (2.5, SMUSSO5_SIZE), (2.5, 0), align=None)
    revolve(axis=Axis((0, -72.5, 0), (0, 0, -1)))
    with BuildSketch(Plane(origin=(12.5, -60, 0), x_dir=(1, 0, 0), z_dir=(0, 1, 0))) as smusso5_piece_4:
        Polygon((2.5 + SMUSSO5_SIZE, 0), (2.5, SMUSSO5_SIZE), (2.5, 0), align=None)
    revolve(axis=Axis((12.5, -60, 0), (0, 0, -1)))


solid = part.part
